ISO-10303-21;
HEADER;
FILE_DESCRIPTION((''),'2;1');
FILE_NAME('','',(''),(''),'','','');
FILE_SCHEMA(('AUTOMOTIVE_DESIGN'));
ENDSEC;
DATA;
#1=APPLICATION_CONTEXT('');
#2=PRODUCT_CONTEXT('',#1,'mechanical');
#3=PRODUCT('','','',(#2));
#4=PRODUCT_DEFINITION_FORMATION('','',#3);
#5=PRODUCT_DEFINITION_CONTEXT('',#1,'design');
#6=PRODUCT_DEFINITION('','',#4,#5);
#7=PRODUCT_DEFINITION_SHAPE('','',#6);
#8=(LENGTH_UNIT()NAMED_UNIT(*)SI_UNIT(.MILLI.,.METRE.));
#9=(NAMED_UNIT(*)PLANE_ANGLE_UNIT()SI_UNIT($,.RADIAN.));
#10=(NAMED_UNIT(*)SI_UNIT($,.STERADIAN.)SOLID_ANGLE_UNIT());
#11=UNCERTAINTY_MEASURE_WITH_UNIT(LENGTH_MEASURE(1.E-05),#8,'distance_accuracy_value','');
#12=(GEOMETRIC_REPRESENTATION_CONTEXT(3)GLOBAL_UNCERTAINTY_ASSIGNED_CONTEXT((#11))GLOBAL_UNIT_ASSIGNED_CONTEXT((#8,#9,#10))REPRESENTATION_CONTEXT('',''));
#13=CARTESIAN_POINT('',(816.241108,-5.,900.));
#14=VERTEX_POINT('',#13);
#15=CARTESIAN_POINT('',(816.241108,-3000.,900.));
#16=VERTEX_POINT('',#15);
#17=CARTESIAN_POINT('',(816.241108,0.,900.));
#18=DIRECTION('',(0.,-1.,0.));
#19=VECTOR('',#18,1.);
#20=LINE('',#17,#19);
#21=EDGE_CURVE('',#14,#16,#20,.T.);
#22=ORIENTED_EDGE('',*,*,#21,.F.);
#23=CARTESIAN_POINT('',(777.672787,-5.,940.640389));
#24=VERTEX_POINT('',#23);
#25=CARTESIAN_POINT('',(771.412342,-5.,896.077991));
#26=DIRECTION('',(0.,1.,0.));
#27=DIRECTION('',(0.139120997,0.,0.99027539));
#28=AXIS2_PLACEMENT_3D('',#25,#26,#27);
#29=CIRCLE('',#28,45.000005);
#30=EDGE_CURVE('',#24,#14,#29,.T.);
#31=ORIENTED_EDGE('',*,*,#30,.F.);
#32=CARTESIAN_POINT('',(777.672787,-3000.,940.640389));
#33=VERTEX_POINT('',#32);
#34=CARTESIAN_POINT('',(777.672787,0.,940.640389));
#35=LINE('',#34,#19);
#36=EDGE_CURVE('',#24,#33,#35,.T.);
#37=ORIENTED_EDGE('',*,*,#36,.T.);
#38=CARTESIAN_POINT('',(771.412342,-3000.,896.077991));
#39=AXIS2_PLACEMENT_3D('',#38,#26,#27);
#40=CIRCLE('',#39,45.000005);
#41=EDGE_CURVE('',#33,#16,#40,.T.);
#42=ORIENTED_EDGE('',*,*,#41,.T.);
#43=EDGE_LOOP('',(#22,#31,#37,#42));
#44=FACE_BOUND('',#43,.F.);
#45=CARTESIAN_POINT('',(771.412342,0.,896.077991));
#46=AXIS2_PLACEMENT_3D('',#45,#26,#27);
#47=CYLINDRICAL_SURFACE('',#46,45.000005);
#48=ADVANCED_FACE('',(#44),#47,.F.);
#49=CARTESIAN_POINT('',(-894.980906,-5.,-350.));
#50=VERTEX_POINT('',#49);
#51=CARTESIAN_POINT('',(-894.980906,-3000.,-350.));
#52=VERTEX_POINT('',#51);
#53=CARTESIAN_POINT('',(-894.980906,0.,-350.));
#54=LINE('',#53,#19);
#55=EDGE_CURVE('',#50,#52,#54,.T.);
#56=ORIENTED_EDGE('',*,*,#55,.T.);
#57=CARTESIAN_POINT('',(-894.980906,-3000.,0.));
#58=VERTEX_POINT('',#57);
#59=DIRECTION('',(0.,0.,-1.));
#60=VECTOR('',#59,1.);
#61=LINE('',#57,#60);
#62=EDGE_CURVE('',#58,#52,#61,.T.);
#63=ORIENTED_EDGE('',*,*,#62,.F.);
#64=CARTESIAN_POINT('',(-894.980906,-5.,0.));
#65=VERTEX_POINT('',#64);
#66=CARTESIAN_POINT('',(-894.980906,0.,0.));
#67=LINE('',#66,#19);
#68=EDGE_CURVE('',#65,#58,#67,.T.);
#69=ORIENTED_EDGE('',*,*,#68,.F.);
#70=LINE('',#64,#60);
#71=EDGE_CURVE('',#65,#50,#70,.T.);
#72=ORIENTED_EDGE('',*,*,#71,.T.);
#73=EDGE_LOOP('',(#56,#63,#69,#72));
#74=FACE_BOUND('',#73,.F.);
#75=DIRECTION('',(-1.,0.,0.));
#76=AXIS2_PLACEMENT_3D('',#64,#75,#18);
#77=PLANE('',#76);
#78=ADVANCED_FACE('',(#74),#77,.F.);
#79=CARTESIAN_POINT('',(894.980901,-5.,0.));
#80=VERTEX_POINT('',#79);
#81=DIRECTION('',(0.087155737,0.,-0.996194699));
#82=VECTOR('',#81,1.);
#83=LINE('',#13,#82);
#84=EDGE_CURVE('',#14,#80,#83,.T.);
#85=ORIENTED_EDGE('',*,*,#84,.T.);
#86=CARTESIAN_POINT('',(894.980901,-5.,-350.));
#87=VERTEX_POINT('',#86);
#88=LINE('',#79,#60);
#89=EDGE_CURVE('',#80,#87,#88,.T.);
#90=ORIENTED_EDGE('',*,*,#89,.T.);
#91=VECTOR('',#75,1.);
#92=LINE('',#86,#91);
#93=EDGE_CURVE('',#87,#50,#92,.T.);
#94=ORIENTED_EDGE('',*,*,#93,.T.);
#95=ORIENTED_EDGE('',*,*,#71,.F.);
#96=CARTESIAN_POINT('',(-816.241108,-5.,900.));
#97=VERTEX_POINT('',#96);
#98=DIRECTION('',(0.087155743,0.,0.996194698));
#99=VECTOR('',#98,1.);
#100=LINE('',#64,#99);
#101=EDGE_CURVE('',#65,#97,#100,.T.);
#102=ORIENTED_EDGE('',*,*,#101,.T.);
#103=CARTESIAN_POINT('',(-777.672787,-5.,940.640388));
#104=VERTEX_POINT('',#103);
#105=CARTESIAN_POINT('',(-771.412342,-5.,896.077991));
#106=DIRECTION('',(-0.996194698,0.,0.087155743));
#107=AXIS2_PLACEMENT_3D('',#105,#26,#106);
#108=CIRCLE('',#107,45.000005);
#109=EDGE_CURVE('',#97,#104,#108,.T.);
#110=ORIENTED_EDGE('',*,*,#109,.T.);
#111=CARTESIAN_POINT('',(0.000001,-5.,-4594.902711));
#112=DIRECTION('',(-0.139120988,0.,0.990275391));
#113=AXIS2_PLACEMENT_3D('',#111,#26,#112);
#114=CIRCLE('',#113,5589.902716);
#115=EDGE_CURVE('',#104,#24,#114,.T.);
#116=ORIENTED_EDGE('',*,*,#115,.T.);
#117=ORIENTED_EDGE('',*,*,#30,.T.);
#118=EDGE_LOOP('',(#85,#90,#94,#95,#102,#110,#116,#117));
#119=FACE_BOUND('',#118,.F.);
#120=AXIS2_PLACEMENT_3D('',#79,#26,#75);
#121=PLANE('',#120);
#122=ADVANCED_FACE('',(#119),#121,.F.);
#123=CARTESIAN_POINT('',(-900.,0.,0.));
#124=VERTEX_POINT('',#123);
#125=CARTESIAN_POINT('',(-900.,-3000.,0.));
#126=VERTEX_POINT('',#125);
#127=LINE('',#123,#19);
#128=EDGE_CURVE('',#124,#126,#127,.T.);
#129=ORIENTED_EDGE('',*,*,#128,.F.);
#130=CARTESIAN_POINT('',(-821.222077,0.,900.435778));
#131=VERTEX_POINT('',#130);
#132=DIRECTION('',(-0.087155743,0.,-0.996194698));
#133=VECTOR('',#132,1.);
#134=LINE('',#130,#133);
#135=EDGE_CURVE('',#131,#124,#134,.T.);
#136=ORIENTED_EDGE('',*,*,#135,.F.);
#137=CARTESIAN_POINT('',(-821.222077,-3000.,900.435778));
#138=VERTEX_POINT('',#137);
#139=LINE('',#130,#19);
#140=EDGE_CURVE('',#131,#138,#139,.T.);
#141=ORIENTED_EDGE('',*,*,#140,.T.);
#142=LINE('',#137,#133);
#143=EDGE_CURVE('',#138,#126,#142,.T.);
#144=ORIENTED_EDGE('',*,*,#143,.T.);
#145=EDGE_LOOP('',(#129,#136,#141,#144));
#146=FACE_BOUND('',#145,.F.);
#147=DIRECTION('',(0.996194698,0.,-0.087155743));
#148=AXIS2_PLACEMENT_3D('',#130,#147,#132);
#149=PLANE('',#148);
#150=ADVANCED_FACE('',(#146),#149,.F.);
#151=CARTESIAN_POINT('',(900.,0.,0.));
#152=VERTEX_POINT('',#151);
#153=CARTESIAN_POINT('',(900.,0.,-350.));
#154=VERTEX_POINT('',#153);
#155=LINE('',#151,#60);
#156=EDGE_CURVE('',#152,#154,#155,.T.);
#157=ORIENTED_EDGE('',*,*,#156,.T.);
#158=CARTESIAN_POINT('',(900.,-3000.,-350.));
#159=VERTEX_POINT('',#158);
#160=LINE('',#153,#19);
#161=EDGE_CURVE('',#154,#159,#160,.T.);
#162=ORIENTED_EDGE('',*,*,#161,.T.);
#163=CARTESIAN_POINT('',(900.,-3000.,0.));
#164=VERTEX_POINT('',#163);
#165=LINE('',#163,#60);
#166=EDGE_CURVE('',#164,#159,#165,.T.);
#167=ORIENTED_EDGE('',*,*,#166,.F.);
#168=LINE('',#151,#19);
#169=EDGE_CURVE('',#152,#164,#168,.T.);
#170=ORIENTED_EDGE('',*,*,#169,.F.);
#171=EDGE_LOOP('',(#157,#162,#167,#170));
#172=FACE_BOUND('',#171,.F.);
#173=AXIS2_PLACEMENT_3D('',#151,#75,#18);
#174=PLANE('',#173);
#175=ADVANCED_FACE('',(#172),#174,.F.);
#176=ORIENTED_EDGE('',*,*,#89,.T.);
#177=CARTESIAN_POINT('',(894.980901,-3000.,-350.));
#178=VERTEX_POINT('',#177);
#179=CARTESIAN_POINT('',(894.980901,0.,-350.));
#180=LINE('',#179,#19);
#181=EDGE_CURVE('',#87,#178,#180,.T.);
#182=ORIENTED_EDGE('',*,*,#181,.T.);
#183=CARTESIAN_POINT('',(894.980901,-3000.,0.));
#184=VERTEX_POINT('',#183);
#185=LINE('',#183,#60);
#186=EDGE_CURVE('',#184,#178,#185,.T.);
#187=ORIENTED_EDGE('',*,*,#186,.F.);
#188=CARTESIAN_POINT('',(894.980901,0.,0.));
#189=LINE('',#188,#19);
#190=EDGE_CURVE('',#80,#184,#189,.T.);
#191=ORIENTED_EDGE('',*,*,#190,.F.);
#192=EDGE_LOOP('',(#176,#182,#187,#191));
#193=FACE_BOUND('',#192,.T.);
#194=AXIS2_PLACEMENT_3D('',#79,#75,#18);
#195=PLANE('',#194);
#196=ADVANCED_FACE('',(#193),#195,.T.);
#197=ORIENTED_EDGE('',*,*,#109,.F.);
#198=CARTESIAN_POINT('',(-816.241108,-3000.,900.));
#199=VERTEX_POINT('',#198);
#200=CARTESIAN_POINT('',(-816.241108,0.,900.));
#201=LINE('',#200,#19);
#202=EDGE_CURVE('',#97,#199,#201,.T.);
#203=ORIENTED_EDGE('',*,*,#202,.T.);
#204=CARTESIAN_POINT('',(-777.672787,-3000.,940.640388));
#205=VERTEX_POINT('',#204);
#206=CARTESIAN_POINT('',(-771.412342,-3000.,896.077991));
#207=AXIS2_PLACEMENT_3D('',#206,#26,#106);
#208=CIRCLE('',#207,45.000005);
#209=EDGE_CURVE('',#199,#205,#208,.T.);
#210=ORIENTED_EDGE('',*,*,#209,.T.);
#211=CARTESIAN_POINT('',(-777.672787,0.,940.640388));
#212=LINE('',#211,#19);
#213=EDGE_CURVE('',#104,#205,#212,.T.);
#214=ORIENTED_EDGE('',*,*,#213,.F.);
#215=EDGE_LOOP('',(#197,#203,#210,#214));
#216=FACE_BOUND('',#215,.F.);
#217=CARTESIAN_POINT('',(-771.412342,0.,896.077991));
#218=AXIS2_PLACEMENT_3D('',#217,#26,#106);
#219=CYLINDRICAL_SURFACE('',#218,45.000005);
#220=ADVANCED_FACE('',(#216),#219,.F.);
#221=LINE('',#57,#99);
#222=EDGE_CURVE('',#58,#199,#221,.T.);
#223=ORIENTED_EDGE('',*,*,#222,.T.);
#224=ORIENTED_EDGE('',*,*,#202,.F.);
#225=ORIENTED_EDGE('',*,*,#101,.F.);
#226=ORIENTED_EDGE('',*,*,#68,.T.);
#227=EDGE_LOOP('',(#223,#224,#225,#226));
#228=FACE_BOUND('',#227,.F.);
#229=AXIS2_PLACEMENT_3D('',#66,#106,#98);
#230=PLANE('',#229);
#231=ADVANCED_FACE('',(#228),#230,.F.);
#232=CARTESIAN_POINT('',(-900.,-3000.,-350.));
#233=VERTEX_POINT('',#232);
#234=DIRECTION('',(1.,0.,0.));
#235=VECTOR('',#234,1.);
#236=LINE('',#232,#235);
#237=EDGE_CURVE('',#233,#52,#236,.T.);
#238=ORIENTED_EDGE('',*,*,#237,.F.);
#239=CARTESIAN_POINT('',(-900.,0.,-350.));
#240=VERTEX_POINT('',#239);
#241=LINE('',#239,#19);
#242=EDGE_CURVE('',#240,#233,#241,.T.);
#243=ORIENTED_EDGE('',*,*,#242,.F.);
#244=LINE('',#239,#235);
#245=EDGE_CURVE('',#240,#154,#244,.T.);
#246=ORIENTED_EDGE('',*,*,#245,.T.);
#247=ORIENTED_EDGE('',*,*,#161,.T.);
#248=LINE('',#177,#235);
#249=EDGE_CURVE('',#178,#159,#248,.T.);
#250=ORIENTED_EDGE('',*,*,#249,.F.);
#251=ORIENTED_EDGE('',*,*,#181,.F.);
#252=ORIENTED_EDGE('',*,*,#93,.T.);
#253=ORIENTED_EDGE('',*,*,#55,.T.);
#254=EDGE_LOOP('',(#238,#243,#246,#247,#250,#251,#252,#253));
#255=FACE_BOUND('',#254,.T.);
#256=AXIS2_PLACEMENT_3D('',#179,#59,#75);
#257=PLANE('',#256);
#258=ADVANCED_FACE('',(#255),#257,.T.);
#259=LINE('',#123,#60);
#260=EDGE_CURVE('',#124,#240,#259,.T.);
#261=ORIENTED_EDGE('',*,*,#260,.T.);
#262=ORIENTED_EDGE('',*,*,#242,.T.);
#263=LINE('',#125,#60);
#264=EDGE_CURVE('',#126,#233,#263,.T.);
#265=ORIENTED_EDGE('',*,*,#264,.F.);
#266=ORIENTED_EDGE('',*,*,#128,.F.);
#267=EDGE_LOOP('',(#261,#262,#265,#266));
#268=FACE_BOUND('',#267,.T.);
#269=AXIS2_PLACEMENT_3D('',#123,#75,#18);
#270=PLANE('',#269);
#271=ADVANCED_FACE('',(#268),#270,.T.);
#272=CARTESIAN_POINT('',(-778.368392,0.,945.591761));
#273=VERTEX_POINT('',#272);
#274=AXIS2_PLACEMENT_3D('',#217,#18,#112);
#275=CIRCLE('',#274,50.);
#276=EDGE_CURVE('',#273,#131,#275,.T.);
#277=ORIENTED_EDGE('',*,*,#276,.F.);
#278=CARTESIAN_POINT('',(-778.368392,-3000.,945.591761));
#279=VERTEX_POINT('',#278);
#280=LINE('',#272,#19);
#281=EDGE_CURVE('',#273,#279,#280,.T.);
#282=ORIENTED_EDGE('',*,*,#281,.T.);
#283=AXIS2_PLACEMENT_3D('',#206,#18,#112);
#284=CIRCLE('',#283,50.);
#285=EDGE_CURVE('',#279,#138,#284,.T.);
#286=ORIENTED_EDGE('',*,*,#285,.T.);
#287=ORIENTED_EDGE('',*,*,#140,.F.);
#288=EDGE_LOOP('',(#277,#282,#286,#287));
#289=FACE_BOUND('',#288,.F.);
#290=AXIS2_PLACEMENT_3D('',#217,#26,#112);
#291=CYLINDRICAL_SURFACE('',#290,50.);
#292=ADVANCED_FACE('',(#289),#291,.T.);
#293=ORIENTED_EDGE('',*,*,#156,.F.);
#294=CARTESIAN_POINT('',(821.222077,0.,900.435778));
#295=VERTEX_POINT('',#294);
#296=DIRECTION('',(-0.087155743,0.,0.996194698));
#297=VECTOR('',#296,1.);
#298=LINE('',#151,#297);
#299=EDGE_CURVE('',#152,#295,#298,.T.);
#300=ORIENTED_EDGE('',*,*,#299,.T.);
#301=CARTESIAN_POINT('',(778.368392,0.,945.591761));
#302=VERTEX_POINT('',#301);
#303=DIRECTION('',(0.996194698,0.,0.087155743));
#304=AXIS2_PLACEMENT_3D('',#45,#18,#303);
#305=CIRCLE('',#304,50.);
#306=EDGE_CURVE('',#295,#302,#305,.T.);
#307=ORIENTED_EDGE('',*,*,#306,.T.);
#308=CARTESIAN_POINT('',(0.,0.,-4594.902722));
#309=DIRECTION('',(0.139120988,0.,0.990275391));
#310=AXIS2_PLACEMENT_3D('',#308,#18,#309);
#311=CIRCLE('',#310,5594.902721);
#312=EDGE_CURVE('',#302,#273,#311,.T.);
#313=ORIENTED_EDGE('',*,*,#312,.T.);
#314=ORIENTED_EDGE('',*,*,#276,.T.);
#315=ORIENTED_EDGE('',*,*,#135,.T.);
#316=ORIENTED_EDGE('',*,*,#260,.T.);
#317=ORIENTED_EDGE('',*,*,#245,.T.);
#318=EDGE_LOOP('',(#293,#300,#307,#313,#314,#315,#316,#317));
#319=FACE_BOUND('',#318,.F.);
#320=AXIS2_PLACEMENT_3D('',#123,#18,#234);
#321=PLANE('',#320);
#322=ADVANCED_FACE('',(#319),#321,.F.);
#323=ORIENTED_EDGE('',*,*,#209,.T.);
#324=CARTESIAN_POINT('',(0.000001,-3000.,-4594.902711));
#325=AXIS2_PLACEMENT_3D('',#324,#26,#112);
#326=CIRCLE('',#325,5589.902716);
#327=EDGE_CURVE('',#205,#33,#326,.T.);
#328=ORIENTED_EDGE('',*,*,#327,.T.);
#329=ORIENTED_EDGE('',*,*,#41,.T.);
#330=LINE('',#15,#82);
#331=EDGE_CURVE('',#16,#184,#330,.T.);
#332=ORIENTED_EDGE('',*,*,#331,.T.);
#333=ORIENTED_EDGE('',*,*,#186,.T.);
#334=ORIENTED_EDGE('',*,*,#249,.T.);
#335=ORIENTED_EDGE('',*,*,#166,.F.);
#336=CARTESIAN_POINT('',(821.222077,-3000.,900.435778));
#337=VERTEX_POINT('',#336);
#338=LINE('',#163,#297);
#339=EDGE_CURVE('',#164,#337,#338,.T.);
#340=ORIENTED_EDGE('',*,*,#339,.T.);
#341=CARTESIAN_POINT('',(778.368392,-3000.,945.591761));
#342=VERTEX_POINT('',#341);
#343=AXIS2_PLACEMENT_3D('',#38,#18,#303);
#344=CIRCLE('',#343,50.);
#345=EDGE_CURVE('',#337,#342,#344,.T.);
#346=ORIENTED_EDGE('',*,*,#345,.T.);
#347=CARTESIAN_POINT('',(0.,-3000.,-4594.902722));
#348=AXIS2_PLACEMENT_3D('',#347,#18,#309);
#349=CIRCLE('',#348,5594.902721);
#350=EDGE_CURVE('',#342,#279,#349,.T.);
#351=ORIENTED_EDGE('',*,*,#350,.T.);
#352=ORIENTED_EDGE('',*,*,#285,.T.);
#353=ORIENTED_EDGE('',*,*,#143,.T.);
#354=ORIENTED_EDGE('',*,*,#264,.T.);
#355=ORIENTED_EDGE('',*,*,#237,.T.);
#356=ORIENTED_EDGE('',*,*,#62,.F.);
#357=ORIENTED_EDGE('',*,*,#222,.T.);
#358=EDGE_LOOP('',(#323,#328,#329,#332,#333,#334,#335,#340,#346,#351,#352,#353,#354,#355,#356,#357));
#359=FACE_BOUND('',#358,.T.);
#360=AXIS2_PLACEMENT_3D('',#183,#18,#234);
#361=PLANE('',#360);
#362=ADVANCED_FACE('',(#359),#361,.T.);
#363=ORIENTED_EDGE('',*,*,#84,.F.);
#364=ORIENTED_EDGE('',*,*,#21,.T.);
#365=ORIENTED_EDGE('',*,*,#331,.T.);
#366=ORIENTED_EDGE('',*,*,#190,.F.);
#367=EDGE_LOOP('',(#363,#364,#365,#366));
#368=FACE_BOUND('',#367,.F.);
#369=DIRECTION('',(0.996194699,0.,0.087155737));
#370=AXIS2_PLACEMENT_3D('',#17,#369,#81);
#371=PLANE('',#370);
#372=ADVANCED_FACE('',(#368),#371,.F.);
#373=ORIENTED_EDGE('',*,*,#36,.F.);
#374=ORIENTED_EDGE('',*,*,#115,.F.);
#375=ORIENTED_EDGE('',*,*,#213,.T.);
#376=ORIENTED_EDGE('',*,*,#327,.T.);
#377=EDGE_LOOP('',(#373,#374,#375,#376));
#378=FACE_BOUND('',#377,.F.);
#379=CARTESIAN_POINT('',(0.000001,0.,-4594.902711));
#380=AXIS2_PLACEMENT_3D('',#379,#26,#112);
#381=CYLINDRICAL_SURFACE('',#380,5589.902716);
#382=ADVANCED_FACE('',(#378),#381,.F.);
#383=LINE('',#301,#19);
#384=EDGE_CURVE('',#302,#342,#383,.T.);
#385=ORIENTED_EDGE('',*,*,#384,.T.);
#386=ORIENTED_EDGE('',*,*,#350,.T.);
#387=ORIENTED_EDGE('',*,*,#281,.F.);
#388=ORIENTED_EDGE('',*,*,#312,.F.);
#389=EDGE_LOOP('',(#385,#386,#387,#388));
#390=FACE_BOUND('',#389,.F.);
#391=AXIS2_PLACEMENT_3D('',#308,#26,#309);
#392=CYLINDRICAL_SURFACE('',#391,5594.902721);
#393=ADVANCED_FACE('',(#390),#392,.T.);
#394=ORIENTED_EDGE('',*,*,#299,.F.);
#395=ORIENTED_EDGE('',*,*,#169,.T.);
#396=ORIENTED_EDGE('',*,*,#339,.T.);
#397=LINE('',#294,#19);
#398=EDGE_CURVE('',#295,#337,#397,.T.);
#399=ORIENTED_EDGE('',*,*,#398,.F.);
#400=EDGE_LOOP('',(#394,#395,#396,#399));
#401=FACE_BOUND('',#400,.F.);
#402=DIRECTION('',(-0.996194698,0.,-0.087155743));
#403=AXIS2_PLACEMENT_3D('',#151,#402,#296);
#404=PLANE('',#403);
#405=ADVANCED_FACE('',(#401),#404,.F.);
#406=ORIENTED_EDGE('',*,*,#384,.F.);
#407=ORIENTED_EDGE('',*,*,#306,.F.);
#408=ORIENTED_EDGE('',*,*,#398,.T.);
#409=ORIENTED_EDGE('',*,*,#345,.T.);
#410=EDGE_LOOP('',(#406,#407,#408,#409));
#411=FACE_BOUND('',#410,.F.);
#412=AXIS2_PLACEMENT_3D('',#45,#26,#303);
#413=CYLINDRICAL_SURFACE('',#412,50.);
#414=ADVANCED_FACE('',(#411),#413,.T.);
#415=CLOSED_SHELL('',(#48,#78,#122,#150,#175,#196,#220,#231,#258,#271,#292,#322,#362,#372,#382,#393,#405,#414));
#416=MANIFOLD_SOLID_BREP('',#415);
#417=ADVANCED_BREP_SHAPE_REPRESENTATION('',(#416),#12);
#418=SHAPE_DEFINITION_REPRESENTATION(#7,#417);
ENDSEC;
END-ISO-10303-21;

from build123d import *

# Parameters (mm, degrees)
F1_DEPTH = 3000
F3_DEPTH = 5
F4_DEPTH = 350


# Not quite as in the source:
# - ends of sketch curves that miss each other by under 0.0002 mm in the source are joined


with BuildPart() as f1:
    # F0 (on Front) → F1 (new body)
    with BuildSketch(Plane.XZ):
        with BuildLine():
            Line((-821.2220771658, 900.4357782981), (-900, 0))
            Line((-900, 0), (-894.9809055989, 0))
            Line((-894.9809055989, 0), (-816.2411084255, 900))
            ThreePointArc((-816.2411084255, 900), (-804.0533773431, 927.0548092338), (-777.6727873626, 940.6403884962))
            ThreePointArc((-777.6727873626, 940.6403884962), (0, 995.0000047684), (777.6727873915, 940.640388702))
            ThreePointArc((777.6727873915, 940.640388702), (804.0533773431, 927.0548092338), (816.2411084255, 900))
            Line((816.2411084255, 900), (894.9809008123, 0))
            Line((894.9809008123, 0), (900, 0))
            Line((900, 0), (821.2220771658, 900.4357782981))
            ThreePointArc((821.2220771658, 900.4357782981), (807.6801551758, 930.4966742615), (778.3683916368, 945.5917607313))
            ThreePointArc((778.3683916368, 945.5917607313), (0, 999.9999997922), (-778.3683916368, 945.5917607313))
            ThreePointArc((-778.3683916368, 945.5917607313), (-807.6801551758, 930.4966742615), (-821.2220771658, 900.4357782981))
        make_face()
    extrude(amount=F1_DEPTH)

    # F2 (on face) → F3 (join)
    with BuildSketch(Plane(origin=(0, 0, 0), x_dir=(-1, 0, 0), z_dir=(0, 1, 0))):
        with BuildLine():
            Line((-816.2411084255, 900), (-894.9809008123, 0))
            Line((-894.9809008123, 0), (894.9809055989, 0))
            Line((894.9809055989, 0), (816.2411084255, 900))
            ThreePointArc((816.2411084255, 900), (804.0533773431, 927.0548092338), (777.6727873626, 940.6403884962))
            ThreePointArc((777.6727873626, 940.6403884962), (-7.3e-09, 995.0000047684), (-777.6727873915, 940.640388702))
            ThreePointArc((-777.6727873915, 940.640388702), (-804.0533773182, 927.0548092601), (-816.2411084255, 900))
        make_face()
    extrude(amount=-F3_DEPTH)

    # F4 (add): a face of the model
    f4_faces = [f1.faces().sort_by_distance(p)[0] for p in [
        (898.4794719492, -1502.5, 0),
    ]]
    extrude(f4_faces, amount=F4_DEPTH)


solid = f1.part
